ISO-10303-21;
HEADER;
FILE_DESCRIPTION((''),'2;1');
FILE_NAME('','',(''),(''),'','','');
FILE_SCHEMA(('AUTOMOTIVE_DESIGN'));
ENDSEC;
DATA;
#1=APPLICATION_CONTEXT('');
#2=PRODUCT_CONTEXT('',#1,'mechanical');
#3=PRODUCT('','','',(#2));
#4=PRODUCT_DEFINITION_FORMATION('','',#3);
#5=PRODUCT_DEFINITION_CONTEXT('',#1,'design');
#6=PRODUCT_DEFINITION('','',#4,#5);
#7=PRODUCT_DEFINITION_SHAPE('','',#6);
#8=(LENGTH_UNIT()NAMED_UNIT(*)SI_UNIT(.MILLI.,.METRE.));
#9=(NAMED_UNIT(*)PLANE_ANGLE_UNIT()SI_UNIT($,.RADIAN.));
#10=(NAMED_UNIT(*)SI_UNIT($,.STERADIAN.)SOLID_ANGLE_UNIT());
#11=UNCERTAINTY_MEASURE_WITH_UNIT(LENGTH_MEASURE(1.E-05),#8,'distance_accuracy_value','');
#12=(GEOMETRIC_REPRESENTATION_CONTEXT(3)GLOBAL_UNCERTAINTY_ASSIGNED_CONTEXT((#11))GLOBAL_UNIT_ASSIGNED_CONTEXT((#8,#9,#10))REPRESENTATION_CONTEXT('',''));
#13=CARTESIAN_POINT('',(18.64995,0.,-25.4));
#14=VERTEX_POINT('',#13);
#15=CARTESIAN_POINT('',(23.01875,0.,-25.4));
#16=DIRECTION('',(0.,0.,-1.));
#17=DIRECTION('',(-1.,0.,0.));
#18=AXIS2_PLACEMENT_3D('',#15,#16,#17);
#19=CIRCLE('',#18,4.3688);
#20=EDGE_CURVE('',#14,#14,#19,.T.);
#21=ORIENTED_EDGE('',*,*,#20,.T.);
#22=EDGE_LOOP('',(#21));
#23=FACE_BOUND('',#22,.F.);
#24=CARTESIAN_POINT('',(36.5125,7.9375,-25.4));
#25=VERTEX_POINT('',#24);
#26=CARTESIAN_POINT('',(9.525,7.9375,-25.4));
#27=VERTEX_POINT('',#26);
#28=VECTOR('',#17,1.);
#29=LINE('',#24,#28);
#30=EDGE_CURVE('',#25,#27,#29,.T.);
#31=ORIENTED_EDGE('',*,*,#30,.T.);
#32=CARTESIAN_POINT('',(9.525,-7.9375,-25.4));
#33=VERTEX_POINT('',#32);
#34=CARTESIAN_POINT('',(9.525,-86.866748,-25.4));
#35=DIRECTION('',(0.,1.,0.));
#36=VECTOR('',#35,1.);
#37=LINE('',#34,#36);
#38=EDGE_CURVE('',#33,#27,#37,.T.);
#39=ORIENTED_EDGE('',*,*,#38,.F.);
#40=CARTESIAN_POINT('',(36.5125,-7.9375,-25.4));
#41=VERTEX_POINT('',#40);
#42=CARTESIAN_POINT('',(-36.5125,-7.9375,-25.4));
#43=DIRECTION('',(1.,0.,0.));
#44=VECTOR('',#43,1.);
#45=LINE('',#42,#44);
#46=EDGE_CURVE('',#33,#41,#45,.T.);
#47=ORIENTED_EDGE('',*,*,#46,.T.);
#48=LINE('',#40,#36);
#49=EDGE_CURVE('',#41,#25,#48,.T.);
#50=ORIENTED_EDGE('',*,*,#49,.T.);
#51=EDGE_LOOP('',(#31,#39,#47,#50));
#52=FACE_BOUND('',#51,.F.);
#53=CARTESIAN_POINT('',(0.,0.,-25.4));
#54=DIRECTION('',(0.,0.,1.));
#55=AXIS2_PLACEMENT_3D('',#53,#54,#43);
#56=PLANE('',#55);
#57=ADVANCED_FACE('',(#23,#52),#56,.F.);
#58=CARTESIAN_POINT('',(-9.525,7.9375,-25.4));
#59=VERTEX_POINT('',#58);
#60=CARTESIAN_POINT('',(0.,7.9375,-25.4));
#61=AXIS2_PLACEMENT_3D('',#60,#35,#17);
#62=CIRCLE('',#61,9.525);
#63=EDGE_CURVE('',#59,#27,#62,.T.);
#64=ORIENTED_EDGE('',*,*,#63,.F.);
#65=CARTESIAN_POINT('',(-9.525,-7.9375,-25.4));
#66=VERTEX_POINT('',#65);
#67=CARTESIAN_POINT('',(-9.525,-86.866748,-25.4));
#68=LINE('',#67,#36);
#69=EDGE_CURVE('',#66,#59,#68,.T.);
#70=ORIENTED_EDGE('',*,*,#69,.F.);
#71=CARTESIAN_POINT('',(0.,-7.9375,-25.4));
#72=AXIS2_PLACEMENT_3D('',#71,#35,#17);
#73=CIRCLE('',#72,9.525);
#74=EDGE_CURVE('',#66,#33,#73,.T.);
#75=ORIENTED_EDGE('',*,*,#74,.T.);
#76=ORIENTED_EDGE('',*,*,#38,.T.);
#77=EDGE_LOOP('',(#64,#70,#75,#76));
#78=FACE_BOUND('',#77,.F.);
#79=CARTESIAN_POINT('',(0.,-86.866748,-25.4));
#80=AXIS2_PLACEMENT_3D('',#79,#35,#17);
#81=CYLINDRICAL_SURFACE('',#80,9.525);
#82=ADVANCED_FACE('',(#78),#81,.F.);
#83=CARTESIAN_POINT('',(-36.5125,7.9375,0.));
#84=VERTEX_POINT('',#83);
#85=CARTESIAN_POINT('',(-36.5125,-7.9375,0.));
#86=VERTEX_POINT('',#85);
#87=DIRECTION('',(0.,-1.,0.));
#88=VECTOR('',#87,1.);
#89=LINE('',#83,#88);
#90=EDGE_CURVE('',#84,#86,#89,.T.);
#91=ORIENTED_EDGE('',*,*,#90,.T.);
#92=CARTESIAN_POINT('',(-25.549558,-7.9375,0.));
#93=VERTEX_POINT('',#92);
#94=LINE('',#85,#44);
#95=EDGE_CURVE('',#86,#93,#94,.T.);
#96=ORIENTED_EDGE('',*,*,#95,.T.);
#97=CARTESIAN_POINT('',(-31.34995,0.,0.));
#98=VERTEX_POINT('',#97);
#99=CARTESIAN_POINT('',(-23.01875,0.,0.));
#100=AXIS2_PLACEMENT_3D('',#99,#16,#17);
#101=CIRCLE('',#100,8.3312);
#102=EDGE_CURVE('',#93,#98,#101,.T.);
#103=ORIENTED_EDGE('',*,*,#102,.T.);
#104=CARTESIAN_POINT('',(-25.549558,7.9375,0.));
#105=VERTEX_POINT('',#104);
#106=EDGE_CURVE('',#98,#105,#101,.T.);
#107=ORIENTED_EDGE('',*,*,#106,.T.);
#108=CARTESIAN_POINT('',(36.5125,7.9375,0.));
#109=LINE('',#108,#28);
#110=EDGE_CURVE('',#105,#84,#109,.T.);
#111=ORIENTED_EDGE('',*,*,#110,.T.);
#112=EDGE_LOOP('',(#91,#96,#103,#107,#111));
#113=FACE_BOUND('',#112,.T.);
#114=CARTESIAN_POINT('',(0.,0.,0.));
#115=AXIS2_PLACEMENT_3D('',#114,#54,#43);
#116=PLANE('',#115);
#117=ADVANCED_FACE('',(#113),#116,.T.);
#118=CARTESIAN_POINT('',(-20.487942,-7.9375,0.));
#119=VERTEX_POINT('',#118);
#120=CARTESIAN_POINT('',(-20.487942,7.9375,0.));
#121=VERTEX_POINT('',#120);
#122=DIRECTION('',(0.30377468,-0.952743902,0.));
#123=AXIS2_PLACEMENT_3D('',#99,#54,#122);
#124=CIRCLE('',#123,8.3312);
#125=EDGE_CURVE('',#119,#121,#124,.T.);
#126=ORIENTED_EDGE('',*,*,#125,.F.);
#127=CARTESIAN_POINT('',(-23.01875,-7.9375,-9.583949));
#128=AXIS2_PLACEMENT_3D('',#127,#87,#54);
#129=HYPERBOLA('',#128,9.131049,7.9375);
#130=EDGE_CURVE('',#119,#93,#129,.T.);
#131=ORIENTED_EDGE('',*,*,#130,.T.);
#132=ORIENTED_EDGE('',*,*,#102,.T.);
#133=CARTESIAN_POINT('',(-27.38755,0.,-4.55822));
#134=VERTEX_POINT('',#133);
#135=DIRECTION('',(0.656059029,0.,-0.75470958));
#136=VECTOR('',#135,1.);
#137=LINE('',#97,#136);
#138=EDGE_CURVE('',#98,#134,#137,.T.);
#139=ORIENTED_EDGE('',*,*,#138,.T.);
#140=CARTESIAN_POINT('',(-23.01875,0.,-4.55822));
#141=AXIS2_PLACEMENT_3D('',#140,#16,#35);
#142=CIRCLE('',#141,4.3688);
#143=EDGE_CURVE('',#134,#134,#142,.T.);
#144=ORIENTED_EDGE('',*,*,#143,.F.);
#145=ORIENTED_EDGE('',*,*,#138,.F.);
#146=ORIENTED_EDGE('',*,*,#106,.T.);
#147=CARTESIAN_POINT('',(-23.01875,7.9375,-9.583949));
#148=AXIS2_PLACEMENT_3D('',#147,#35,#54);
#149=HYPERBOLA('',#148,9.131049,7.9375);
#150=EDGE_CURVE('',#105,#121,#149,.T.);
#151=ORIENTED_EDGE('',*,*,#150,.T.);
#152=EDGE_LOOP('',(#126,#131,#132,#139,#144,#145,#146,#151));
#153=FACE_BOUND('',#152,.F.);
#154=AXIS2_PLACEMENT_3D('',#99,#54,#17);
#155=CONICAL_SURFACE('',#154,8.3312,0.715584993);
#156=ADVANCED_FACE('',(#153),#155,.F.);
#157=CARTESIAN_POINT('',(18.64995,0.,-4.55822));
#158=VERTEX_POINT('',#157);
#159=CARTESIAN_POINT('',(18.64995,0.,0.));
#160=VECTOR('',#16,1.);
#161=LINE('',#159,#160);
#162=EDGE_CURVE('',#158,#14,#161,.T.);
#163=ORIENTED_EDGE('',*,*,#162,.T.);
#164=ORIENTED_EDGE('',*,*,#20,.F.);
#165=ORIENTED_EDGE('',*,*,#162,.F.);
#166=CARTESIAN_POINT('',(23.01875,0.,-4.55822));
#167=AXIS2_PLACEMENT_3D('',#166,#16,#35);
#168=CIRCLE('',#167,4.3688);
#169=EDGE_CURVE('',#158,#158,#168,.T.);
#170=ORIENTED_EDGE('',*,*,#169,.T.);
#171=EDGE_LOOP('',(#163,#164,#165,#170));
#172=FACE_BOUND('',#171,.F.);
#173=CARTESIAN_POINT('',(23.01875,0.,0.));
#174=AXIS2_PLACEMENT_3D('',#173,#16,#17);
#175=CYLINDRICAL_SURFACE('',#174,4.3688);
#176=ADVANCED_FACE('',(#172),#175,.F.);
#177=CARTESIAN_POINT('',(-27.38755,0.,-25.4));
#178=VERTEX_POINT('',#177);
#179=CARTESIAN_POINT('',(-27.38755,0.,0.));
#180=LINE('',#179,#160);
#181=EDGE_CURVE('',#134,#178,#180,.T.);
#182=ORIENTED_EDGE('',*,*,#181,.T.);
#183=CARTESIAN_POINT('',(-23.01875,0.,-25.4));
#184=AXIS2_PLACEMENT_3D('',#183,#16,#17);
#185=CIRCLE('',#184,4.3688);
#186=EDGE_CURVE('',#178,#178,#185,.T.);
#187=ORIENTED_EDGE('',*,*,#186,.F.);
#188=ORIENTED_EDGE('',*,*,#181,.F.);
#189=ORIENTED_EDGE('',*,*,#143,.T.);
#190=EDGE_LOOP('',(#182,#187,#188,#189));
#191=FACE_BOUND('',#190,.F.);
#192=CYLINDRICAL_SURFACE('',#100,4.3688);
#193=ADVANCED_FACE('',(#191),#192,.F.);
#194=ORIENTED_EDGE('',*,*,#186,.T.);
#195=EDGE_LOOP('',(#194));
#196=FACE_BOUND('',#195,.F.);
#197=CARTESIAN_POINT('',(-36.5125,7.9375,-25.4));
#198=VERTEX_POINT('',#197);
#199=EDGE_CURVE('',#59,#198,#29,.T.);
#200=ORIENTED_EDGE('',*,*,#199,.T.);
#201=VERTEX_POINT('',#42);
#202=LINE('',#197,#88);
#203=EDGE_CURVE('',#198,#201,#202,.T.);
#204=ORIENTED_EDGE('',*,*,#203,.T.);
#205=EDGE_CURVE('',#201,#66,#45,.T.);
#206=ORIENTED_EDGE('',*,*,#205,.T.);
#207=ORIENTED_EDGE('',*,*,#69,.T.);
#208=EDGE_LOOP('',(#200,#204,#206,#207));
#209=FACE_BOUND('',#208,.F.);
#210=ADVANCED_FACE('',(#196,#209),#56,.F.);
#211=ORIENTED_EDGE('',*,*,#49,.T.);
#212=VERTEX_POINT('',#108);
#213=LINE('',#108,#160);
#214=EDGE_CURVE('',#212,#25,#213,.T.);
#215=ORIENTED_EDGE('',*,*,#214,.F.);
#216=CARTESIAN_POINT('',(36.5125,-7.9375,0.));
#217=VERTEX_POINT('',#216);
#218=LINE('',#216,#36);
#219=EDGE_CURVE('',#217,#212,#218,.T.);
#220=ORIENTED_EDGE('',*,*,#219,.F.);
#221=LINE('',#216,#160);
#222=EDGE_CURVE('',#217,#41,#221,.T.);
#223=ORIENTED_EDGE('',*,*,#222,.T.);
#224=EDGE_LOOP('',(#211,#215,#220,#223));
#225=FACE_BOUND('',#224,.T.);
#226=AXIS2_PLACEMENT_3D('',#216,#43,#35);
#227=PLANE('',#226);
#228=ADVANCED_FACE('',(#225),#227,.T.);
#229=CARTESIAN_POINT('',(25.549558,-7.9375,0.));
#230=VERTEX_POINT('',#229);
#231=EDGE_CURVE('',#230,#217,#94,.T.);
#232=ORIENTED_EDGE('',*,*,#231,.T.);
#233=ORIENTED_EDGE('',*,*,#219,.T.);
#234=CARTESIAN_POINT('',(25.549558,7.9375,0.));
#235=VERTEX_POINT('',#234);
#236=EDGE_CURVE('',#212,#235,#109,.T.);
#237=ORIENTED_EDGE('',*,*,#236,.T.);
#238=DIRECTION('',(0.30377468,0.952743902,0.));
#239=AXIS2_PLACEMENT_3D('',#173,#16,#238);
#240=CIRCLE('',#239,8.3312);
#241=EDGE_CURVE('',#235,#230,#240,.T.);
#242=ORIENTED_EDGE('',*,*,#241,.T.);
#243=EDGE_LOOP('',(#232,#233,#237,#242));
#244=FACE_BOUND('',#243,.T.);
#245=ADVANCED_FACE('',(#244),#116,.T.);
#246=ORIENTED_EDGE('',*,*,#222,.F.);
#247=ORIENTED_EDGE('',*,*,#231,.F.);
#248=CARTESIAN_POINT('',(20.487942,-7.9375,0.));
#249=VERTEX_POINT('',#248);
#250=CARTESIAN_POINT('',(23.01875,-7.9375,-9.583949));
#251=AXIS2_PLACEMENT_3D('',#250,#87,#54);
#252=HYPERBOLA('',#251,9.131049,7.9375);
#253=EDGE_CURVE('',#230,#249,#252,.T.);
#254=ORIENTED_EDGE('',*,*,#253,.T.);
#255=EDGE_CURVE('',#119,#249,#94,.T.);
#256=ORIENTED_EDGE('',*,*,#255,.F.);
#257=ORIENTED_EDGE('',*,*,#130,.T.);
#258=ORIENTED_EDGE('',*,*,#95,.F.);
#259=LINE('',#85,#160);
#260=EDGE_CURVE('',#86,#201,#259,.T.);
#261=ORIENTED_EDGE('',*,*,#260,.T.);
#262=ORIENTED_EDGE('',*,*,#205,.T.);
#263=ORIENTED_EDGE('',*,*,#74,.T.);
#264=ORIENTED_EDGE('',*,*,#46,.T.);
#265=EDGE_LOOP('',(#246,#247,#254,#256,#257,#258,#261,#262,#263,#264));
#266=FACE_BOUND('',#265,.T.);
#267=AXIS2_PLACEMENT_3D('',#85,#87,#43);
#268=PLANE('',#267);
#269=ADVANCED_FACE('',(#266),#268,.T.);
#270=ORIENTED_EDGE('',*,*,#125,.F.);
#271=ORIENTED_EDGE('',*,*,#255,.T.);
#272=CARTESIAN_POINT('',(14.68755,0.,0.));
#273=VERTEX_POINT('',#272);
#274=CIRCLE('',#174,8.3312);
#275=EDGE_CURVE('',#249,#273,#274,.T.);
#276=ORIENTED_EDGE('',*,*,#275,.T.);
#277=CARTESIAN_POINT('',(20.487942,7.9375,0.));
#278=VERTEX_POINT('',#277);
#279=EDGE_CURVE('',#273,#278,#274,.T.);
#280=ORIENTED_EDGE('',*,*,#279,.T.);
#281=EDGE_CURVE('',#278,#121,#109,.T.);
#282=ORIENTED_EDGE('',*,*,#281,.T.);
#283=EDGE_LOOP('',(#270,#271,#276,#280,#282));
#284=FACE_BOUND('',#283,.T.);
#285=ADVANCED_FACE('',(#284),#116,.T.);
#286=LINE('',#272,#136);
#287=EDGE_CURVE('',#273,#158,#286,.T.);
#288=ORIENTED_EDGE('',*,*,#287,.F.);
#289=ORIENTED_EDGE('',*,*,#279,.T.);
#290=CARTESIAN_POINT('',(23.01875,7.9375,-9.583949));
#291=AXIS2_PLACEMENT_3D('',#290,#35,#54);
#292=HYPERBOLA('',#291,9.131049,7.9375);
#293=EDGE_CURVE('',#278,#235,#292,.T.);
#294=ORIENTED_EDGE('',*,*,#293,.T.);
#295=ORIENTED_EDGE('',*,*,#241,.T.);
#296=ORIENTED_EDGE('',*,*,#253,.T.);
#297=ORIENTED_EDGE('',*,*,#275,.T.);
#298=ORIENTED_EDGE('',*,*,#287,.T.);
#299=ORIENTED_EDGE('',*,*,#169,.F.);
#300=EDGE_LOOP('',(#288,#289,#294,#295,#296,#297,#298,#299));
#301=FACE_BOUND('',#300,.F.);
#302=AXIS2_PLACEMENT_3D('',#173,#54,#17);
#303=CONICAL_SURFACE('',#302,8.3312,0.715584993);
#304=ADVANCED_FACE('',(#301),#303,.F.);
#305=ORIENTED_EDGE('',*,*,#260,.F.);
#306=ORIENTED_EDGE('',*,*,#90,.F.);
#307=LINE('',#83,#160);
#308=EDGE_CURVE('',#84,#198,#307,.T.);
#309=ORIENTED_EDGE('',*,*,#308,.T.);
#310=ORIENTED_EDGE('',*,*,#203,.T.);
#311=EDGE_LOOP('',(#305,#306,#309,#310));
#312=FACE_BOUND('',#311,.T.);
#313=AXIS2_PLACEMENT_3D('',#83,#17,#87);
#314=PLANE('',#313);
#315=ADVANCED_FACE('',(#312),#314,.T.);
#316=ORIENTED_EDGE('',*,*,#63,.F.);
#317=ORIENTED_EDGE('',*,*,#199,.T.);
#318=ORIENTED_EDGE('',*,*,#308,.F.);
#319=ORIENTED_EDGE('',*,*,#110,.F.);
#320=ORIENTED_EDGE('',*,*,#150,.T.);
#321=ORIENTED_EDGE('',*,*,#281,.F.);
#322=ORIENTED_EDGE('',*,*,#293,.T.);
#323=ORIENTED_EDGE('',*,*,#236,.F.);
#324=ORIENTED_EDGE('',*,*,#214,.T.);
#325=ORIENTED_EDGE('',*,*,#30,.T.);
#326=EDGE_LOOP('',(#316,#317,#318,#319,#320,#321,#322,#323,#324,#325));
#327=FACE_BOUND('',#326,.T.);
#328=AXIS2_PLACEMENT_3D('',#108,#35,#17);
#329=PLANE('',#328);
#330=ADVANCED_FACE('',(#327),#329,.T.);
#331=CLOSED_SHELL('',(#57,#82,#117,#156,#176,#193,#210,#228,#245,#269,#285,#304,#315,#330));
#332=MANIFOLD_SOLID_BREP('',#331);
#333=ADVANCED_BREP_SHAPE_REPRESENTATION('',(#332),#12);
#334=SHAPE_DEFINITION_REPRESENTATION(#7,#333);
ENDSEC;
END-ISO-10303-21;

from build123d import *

# Parameters (mm, degrees)
F1_DEPTH       = 25.4
F2_D           = 8.7376
F2_DEPTH       = 29.6333418
F2_CSINK_D     = 16.6624
F2_CSINK_ANGLE = 82
F2_TIP         = 2.6250398724
F4_D           = 19.05


# Not quite as in the source:
# - a feature names something its author has since deleted; it is built from what else it names


with BuildPart() as f1:
    # F0 (on Top) → F1 (new body)
    with BuildSketch(Plane.XY):
        Polygon((36.5125, -7.9375), (36.5125, 7.9375), (0, 7.9375), (-36.5125, 7.9375), (-36.5125, -7.9375), align=None)
    extrude(amount=-F1_DEPTH)

    # F2
    with Locations(Plane.XY):
        with Locations((-23.01875, 0), (23.01875, 0)):
            CounterSinkHole(F2_D / 2, F2_CSINK_D / 2, depth=F2_DEPTH, counter_sink_angle=F2_CSINK_ANGLE)
            with Locations((0, 0, -(F2_DEPTH + F2_TIP / 2))):  # 118° drill point
                Cone(0, F2_D / 2, F2_TIP, mode=Mode.SUBTRACT)

    # F4 (through all)
    with Locations(Plane.XZ.offset(7.9375)):
        with Locations((0, -25.4)):
            Hole(F4_D / 2)


solid = f1.part
